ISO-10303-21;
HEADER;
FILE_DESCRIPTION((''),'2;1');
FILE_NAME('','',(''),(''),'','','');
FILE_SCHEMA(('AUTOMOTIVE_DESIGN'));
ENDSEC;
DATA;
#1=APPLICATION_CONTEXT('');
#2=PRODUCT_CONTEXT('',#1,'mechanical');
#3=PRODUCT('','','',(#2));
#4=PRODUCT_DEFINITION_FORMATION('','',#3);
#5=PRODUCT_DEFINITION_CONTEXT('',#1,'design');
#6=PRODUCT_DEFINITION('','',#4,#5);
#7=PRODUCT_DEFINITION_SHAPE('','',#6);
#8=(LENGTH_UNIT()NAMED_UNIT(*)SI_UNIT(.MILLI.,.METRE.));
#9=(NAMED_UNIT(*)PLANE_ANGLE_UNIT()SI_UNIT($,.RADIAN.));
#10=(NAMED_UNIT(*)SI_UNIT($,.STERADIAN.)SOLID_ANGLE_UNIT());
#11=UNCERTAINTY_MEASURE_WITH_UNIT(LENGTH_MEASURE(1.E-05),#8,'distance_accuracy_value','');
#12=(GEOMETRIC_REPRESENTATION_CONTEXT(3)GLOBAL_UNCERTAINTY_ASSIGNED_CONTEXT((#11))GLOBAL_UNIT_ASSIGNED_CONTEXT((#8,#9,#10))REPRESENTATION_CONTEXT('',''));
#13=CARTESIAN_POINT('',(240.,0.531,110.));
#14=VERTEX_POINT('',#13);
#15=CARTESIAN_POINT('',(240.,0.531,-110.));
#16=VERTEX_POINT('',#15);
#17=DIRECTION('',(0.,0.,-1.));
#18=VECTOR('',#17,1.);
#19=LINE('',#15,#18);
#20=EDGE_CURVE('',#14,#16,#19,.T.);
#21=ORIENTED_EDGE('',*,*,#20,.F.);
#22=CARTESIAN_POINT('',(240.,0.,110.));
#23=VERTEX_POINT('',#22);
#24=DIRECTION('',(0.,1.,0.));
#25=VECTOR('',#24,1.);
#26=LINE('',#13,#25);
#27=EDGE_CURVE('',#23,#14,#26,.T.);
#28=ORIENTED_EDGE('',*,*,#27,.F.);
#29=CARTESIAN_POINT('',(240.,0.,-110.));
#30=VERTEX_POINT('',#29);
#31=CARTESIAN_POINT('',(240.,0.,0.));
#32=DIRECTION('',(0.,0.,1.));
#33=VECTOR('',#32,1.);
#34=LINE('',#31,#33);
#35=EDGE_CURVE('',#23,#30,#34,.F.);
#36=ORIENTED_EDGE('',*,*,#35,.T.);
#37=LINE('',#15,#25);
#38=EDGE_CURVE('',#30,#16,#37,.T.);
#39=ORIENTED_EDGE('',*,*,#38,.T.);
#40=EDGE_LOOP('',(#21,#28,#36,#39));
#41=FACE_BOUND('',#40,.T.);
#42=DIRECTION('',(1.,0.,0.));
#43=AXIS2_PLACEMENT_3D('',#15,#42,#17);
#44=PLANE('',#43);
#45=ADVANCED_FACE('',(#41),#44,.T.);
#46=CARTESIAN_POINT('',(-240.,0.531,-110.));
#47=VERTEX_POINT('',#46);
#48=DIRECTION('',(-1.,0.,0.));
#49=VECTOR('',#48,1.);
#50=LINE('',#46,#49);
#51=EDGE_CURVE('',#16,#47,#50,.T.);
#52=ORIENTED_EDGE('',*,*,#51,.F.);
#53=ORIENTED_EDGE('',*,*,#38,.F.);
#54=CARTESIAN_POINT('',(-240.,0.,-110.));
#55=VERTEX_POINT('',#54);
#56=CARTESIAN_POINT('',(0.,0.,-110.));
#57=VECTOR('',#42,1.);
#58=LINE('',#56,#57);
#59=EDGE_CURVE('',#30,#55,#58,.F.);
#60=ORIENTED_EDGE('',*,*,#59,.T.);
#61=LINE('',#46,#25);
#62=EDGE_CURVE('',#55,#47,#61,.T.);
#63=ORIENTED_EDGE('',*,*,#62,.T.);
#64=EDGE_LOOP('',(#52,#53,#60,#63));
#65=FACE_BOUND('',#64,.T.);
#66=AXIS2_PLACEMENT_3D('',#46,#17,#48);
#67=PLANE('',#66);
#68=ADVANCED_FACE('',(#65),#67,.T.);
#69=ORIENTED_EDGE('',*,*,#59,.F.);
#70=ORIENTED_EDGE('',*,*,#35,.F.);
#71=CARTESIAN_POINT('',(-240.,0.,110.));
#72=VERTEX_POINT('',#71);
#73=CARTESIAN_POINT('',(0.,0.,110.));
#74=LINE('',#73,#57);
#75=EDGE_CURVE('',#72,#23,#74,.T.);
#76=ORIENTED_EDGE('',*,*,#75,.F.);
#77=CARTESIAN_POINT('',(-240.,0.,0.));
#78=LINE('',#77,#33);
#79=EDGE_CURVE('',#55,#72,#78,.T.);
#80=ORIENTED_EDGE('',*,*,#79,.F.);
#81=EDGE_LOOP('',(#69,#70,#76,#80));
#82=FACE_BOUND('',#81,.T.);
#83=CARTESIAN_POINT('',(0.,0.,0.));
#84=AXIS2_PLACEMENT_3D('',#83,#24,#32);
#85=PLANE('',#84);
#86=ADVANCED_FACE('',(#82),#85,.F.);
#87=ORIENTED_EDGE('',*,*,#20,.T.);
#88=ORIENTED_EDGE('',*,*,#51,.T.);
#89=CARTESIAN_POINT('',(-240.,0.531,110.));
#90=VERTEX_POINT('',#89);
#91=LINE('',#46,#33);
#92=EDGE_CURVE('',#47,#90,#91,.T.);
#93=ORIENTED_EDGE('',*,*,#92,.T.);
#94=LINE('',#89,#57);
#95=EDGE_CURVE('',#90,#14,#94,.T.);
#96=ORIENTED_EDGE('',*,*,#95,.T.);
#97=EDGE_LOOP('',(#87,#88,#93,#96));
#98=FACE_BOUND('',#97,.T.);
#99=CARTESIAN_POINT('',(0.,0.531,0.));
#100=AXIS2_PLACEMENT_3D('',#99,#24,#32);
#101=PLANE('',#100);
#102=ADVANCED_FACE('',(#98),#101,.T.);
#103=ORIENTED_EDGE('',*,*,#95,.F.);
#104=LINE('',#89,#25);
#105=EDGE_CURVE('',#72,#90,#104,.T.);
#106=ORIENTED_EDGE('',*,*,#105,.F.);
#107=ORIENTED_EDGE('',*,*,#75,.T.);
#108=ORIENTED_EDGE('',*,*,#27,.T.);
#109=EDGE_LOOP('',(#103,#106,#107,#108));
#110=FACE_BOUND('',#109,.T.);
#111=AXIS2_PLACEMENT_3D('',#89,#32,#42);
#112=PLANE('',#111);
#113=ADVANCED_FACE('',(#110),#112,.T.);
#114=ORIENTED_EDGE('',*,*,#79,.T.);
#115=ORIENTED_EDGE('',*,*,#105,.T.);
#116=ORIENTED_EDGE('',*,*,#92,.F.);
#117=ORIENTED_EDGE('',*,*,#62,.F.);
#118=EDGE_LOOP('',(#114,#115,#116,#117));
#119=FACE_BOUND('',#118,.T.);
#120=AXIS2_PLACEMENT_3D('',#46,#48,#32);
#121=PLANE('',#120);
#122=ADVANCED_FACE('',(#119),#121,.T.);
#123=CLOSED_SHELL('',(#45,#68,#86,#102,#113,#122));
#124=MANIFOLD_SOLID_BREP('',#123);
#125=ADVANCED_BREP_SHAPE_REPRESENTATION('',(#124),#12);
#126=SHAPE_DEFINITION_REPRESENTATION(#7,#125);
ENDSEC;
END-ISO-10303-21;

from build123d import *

# Parameters (mm, degrees)
SKETCH2_W           = 480
SKETCH2_H           = 220
BOSS_EXTRUDE1_DEPTH = 0.531


with BuildPart() as part:
    # Sketch2 → Boss-Extrude1 (new body)
    with BuildSketch(Plane(origin=(0, 0, 0), x_dir=(1, 0, 0), z_dir=(0, 1, 0))):
        Rectangle(SKETCH2_W, SKETCH2_H)
    extrude(amount=BOSS_EXTRUDE1_DEPTH)


solid = part.part
